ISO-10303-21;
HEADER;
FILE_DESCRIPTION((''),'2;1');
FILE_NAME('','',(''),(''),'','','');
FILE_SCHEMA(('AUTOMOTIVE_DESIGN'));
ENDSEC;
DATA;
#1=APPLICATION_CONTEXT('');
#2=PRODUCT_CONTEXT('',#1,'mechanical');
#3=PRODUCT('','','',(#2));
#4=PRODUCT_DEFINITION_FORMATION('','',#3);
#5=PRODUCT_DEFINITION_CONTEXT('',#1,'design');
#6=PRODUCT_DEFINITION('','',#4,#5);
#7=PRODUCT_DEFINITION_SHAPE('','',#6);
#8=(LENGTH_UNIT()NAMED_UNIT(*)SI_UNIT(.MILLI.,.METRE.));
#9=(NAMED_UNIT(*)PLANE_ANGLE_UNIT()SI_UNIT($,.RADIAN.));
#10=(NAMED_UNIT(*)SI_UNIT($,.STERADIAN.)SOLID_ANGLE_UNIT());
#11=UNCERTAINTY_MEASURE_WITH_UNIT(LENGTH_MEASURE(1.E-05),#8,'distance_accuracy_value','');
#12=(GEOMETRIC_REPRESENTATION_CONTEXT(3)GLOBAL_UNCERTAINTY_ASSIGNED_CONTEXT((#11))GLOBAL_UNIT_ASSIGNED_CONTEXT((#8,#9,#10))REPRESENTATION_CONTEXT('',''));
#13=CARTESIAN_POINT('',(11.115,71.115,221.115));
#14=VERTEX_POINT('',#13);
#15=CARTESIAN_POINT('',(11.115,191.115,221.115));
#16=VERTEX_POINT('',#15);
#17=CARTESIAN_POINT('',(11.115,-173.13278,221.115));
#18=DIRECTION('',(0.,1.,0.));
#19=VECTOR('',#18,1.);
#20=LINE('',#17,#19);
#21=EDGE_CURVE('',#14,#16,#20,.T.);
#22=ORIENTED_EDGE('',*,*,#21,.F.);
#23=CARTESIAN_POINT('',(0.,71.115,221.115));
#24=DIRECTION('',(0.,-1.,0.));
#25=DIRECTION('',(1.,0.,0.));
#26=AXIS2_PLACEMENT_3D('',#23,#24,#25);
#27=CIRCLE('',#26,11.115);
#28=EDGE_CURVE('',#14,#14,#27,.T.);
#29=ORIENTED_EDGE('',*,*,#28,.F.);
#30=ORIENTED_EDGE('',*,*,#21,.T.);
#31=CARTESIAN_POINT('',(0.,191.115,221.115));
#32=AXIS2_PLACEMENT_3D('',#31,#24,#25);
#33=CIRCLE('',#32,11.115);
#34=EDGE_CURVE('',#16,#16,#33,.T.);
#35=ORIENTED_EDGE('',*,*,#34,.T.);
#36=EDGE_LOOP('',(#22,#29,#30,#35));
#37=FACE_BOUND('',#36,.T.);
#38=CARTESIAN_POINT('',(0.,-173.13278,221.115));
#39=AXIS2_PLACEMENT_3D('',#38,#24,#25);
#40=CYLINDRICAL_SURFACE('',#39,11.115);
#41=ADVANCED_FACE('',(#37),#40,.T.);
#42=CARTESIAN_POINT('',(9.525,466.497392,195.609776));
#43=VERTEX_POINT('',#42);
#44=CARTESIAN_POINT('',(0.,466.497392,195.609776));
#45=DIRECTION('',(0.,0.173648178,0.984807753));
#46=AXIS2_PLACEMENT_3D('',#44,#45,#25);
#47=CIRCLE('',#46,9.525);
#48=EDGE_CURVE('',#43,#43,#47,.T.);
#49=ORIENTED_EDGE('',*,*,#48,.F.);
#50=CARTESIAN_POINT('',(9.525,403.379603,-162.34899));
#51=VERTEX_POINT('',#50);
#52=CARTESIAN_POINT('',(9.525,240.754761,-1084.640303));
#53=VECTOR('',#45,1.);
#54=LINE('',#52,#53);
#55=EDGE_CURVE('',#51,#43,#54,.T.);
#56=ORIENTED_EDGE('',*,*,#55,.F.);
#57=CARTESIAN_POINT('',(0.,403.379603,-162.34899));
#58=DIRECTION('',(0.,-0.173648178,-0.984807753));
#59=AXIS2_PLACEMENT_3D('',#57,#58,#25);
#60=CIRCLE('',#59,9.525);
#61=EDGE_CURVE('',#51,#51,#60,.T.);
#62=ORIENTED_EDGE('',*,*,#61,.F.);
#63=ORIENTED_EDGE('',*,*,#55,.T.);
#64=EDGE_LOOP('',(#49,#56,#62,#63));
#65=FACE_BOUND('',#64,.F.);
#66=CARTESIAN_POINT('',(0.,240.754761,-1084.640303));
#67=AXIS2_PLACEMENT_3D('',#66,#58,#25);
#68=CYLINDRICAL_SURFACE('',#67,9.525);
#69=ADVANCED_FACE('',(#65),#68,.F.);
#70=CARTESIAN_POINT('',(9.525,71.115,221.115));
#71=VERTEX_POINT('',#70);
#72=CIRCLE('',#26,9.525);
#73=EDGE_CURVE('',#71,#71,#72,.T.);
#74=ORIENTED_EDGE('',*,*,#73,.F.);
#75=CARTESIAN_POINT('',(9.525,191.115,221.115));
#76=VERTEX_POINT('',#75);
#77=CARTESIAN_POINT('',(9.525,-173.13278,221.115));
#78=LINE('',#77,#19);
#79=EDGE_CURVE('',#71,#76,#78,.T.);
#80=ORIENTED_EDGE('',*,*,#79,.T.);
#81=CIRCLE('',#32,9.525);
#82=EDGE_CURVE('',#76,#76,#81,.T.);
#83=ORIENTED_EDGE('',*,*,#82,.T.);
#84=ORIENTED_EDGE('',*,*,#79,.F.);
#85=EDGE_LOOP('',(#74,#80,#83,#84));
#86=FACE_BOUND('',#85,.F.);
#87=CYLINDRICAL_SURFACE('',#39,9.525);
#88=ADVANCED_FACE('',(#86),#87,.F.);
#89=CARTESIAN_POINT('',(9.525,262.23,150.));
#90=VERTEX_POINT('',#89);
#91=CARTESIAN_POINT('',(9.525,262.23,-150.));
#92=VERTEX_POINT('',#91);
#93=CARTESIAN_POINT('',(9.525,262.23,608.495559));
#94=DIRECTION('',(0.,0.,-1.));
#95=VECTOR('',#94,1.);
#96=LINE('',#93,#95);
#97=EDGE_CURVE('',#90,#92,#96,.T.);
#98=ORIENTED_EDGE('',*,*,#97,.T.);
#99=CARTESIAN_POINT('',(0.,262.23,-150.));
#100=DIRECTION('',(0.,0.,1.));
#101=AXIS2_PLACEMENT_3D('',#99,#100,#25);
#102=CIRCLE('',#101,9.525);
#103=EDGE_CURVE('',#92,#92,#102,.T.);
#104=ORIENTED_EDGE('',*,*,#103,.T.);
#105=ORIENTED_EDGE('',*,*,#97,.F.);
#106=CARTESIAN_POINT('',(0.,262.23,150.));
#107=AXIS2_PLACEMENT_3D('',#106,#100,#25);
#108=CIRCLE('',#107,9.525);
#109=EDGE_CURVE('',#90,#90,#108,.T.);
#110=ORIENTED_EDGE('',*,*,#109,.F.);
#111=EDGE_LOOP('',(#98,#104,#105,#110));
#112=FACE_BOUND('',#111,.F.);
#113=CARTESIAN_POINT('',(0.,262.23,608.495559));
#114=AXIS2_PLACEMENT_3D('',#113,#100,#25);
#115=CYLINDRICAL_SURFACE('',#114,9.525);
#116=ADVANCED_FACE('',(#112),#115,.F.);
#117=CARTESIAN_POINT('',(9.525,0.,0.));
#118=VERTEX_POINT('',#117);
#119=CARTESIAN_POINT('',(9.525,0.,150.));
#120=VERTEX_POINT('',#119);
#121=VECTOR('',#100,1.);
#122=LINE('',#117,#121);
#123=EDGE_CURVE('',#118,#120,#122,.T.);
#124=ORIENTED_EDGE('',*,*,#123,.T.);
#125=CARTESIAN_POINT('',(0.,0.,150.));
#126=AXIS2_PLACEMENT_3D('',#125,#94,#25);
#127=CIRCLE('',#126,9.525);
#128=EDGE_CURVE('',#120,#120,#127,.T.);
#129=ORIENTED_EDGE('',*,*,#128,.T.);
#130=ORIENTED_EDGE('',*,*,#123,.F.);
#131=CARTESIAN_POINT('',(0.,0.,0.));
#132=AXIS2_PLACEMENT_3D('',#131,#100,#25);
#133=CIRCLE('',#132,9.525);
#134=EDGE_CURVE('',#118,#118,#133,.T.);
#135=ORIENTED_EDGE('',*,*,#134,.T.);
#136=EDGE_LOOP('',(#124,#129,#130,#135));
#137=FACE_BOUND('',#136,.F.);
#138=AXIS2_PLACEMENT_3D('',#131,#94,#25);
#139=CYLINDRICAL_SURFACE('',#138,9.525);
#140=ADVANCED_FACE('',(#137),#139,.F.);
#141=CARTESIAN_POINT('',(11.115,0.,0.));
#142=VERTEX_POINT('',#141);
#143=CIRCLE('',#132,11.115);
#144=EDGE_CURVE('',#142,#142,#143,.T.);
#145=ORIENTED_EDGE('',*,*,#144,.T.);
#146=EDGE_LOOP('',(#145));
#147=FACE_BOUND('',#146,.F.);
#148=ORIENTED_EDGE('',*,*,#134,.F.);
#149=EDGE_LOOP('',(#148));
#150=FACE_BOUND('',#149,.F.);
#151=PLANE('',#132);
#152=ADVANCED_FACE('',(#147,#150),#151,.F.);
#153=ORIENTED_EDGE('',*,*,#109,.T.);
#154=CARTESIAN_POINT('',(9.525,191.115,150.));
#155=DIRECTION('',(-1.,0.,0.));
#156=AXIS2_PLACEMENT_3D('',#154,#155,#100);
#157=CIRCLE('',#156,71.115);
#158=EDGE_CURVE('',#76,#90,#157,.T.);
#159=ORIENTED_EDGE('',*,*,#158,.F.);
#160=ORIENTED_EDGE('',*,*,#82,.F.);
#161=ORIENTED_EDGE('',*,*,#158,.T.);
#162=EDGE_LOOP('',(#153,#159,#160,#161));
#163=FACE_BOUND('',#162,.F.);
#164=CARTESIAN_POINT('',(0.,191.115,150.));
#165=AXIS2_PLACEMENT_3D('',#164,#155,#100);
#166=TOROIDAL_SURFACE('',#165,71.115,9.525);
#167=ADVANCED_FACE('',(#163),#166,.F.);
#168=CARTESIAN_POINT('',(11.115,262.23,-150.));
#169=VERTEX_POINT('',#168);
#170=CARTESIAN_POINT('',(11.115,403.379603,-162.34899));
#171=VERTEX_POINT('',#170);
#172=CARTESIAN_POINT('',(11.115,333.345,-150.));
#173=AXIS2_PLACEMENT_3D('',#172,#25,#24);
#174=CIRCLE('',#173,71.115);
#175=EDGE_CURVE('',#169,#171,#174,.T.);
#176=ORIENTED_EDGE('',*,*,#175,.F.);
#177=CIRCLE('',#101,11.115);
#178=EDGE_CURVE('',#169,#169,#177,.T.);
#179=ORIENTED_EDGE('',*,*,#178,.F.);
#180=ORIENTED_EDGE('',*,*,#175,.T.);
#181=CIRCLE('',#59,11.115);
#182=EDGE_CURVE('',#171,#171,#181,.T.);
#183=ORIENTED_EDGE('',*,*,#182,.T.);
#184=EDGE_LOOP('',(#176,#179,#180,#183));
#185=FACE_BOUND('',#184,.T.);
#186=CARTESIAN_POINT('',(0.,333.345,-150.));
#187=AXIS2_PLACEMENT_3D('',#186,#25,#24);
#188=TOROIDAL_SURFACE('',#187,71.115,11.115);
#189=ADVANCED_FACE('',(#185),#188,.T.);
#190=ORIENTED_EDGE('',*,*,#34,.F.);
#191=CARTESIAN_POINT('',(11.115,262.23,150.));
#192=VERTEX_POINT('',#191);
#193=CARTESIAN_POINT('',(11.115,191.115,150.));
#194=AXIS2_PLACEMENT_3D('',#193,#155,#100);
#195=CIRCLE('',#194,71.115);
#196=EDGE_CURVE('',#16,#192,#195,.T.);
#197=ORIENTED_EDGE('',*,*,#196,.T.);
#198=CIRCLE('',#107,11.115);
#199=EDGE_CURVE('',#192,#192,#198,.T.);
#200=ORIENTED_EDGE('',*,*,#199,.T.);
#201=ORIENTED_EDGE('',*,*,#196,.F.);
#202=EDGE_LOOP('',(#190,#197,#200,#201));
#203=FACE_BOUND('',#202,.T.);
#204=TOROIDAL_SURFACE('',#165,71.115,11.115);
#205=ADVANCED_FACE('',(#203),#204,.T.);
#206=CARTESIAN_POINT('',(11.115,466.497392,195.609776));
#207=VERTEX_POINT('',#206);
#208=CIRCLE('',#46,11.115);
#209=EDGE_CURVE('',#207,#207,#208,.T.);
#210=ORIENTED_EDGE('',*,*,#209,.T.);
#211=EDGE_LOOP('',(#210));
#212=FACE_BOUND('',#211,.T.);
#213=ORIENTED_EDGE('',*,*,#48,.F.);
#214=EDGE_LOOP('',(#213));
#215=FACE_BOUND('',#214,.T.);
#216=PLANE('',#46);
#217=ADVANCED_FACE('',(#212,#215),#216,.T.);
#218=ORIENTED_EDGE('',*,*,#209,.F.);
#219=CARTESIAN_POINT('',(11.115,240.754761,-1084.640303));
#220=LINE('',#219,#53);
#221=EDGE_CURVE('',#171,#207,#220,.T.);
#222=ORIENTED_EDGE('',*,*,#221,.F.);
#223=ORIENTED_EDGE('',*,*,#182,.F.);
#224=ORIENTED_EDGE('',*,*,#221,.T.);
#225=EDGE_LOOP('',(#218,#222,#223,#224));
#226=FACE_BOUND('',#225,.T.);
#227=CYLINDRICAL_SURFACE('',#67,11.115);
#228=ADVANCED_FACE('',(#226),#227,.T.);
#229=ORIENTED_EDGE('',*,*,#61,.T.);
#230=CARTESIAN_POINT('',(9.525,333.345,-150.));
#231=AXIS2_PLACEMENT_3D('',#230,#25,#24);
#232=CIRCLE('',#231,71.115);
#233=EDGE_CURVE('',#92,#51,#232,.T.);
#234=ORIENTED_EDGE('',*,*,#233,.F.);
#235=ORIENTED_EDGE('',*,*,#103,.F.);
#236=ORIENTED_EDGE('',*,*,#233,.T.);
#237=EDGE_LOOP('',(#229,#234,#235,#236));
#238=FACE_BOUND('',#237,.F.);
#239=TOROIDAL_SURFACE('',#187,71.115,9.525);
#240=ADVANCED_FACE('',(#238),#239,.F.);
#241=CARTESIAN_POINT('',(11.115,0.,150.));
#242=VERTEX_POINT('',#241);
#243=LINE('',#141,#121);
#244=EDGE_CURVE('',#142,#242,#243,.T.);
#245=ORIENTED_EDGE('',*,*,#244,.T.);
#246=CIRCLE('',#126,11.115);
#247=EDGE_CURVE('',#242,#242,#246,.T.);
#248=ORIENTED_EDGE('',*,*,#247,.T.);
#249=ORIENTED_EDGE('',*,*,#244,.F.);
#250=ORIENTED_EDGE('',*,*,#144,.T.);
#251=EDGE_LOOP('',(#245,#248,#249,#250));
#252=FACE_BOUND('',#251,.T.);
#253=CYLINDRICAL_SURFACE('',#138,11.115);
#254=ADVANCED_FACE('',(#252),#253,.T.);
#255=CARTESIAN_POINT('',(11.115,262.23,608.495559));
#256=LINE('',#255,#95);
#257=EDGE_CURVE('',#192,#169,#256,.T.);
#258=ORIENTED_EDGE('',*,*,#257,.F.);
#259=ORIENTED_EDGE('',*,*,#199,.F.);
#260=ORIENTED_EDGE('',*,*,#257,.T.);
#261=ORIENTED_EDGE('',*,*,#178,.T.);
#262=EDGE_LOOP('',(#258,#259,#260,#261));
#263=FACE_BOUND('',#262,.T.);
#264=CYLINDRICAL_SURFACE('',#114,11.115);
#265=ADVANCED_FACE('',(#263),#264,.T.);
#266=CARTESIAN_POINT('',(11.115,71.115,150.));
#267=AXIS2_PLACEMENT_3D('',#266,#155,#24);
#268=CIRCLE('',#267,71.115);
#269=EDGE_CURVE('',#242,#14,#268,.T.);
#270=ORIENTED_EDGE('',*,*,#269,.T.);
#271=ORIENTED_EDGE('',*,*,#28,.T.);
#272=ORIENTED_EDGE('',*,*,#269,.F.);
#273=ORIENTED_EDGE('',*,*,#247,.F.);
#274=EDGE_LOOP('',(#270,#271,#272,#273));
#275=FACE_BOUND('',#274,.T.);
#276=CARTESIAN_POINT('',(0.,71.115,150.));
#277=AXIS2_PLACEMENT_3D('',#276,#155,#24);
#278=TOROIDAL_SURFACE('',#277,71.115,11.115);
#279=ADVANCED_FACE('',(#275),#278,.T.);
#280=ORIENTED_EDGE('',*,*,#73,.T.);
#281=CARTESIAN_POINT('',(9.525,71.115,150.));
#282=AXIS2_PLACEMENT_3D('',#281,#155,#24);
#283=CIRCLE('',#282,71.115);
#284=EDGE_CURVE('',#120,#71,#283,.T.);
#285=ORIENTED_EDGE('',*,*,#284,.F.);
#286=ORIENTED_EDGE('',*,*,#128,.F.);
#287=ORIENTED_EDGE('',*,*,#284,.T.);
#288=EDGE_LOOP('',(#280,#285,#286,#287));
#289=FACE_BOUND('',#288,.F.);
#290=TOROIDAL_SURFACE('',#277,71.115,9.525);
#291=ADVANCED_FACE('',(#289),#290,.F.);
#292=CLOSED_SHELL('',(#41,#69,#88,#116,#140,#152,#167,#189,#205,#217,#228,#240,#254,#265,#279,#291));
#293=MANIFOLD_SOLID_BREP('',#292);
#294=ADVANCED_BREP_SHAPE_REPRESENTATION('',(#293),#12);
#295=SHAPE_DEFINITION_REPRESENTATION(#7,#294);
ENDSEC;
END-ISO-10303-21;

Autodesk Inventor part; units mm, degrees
sketch "Esboço10" plane through (0, 0, 0) normal (0, 0, 1) x (1, 0, 0)
  circle A0 centre (0, 0) radius 9.525
  circle A1 centre (0, 0) radius 11.115
  dimension "d35" = 19.05
  dimension "d36" = 1.59
extrude "Extrusão3" add sketch "Esboço10" along normal blind 1300
ref_plane "Plano de trabalho10" through (0, 11.115, 0) normal (0, 1, 0) x (-1, 0, 0)
sketch "Esboço17" plane through (0, 11.115, 0) normal (0, 1, 0) x (-1, 0, 0)
  line L0 (11.115, 0) -> (11.115, 1300) projected
  line L1 (11.115, 150) -> (-11.115, 150)
  line L2 (-11.115, 0) -> (-11.115, 1300) projected
  line L3 (-11.115, 0) -> (11.115, 0) projected
  point P0 (0, 0)
  dimension "d62" = 150
bend part "Vergar peça7" radius 60 angle 90 line through (-11.115, 11.115, 150) along (1, 0, 0) centre toward (0, 1, 0) moving side (0, 0, 1) both sides no
ref_plane "Plano de trabalho11" through (0, -173.1328, 210) normal (0, 0, 1) x (1, 0, 0)
sketch "Esboço18" plane through (0, -173.1328, 210) normal (0, 0, 1) x (1, 0, 0)
  line L0 (11.115, 244.2478) -> (11.115, 1300) projected
  line L1 (11.115, 364.2478) -> (-11.115, 364.2478)
  line L2 (-11.115, 244.2478) -> (-11.115, 1300) projected
  line L3 (11.115, 244.2478) -> (-11.115, 244.2478) projected
  point P0 (0, 173.1328)
  dimension "d65" = 120
bend part "Vergar peça8" radius 60 angle 90 line through (11.115, 191.115, 210) along (-1, 0, 0) centre toward (0, 0, -1) moving side (0, 1, 0) both sides no
ref_plane "Plano de trabalho12" through (0, 273.345, 608.4956) normal (0, 1, 0) x (-1, 0, 0)
sketch "Esboço19" plane through (0, 273.345, 608.4956) normal (0, 1, 0) x (-1, 0, 0)
  line L0 (-11.115, -458.4956) -> (-11.115, -1300) projected
  line L1 (-11.115, -758.4956) -> (11.115, -758.4956)
  line L2 (11.115, -458.4956) -> (11.115, -1300) projected
  line L3 (-11.115, -458.4956) -> (11.115, -458.4956) projected
  point P0 (0, -608.4956)
  dimension "d68" = 300
bend part "Vergar peça9" radius 60 angle 170 line through (11.115, 273.345, -150) along (-1, 0, 0) centre toward (0, 1, 0) moving side (0, 0, -1) both sides no
properties part number "Front support" material "Aço inoxidável, polido"
